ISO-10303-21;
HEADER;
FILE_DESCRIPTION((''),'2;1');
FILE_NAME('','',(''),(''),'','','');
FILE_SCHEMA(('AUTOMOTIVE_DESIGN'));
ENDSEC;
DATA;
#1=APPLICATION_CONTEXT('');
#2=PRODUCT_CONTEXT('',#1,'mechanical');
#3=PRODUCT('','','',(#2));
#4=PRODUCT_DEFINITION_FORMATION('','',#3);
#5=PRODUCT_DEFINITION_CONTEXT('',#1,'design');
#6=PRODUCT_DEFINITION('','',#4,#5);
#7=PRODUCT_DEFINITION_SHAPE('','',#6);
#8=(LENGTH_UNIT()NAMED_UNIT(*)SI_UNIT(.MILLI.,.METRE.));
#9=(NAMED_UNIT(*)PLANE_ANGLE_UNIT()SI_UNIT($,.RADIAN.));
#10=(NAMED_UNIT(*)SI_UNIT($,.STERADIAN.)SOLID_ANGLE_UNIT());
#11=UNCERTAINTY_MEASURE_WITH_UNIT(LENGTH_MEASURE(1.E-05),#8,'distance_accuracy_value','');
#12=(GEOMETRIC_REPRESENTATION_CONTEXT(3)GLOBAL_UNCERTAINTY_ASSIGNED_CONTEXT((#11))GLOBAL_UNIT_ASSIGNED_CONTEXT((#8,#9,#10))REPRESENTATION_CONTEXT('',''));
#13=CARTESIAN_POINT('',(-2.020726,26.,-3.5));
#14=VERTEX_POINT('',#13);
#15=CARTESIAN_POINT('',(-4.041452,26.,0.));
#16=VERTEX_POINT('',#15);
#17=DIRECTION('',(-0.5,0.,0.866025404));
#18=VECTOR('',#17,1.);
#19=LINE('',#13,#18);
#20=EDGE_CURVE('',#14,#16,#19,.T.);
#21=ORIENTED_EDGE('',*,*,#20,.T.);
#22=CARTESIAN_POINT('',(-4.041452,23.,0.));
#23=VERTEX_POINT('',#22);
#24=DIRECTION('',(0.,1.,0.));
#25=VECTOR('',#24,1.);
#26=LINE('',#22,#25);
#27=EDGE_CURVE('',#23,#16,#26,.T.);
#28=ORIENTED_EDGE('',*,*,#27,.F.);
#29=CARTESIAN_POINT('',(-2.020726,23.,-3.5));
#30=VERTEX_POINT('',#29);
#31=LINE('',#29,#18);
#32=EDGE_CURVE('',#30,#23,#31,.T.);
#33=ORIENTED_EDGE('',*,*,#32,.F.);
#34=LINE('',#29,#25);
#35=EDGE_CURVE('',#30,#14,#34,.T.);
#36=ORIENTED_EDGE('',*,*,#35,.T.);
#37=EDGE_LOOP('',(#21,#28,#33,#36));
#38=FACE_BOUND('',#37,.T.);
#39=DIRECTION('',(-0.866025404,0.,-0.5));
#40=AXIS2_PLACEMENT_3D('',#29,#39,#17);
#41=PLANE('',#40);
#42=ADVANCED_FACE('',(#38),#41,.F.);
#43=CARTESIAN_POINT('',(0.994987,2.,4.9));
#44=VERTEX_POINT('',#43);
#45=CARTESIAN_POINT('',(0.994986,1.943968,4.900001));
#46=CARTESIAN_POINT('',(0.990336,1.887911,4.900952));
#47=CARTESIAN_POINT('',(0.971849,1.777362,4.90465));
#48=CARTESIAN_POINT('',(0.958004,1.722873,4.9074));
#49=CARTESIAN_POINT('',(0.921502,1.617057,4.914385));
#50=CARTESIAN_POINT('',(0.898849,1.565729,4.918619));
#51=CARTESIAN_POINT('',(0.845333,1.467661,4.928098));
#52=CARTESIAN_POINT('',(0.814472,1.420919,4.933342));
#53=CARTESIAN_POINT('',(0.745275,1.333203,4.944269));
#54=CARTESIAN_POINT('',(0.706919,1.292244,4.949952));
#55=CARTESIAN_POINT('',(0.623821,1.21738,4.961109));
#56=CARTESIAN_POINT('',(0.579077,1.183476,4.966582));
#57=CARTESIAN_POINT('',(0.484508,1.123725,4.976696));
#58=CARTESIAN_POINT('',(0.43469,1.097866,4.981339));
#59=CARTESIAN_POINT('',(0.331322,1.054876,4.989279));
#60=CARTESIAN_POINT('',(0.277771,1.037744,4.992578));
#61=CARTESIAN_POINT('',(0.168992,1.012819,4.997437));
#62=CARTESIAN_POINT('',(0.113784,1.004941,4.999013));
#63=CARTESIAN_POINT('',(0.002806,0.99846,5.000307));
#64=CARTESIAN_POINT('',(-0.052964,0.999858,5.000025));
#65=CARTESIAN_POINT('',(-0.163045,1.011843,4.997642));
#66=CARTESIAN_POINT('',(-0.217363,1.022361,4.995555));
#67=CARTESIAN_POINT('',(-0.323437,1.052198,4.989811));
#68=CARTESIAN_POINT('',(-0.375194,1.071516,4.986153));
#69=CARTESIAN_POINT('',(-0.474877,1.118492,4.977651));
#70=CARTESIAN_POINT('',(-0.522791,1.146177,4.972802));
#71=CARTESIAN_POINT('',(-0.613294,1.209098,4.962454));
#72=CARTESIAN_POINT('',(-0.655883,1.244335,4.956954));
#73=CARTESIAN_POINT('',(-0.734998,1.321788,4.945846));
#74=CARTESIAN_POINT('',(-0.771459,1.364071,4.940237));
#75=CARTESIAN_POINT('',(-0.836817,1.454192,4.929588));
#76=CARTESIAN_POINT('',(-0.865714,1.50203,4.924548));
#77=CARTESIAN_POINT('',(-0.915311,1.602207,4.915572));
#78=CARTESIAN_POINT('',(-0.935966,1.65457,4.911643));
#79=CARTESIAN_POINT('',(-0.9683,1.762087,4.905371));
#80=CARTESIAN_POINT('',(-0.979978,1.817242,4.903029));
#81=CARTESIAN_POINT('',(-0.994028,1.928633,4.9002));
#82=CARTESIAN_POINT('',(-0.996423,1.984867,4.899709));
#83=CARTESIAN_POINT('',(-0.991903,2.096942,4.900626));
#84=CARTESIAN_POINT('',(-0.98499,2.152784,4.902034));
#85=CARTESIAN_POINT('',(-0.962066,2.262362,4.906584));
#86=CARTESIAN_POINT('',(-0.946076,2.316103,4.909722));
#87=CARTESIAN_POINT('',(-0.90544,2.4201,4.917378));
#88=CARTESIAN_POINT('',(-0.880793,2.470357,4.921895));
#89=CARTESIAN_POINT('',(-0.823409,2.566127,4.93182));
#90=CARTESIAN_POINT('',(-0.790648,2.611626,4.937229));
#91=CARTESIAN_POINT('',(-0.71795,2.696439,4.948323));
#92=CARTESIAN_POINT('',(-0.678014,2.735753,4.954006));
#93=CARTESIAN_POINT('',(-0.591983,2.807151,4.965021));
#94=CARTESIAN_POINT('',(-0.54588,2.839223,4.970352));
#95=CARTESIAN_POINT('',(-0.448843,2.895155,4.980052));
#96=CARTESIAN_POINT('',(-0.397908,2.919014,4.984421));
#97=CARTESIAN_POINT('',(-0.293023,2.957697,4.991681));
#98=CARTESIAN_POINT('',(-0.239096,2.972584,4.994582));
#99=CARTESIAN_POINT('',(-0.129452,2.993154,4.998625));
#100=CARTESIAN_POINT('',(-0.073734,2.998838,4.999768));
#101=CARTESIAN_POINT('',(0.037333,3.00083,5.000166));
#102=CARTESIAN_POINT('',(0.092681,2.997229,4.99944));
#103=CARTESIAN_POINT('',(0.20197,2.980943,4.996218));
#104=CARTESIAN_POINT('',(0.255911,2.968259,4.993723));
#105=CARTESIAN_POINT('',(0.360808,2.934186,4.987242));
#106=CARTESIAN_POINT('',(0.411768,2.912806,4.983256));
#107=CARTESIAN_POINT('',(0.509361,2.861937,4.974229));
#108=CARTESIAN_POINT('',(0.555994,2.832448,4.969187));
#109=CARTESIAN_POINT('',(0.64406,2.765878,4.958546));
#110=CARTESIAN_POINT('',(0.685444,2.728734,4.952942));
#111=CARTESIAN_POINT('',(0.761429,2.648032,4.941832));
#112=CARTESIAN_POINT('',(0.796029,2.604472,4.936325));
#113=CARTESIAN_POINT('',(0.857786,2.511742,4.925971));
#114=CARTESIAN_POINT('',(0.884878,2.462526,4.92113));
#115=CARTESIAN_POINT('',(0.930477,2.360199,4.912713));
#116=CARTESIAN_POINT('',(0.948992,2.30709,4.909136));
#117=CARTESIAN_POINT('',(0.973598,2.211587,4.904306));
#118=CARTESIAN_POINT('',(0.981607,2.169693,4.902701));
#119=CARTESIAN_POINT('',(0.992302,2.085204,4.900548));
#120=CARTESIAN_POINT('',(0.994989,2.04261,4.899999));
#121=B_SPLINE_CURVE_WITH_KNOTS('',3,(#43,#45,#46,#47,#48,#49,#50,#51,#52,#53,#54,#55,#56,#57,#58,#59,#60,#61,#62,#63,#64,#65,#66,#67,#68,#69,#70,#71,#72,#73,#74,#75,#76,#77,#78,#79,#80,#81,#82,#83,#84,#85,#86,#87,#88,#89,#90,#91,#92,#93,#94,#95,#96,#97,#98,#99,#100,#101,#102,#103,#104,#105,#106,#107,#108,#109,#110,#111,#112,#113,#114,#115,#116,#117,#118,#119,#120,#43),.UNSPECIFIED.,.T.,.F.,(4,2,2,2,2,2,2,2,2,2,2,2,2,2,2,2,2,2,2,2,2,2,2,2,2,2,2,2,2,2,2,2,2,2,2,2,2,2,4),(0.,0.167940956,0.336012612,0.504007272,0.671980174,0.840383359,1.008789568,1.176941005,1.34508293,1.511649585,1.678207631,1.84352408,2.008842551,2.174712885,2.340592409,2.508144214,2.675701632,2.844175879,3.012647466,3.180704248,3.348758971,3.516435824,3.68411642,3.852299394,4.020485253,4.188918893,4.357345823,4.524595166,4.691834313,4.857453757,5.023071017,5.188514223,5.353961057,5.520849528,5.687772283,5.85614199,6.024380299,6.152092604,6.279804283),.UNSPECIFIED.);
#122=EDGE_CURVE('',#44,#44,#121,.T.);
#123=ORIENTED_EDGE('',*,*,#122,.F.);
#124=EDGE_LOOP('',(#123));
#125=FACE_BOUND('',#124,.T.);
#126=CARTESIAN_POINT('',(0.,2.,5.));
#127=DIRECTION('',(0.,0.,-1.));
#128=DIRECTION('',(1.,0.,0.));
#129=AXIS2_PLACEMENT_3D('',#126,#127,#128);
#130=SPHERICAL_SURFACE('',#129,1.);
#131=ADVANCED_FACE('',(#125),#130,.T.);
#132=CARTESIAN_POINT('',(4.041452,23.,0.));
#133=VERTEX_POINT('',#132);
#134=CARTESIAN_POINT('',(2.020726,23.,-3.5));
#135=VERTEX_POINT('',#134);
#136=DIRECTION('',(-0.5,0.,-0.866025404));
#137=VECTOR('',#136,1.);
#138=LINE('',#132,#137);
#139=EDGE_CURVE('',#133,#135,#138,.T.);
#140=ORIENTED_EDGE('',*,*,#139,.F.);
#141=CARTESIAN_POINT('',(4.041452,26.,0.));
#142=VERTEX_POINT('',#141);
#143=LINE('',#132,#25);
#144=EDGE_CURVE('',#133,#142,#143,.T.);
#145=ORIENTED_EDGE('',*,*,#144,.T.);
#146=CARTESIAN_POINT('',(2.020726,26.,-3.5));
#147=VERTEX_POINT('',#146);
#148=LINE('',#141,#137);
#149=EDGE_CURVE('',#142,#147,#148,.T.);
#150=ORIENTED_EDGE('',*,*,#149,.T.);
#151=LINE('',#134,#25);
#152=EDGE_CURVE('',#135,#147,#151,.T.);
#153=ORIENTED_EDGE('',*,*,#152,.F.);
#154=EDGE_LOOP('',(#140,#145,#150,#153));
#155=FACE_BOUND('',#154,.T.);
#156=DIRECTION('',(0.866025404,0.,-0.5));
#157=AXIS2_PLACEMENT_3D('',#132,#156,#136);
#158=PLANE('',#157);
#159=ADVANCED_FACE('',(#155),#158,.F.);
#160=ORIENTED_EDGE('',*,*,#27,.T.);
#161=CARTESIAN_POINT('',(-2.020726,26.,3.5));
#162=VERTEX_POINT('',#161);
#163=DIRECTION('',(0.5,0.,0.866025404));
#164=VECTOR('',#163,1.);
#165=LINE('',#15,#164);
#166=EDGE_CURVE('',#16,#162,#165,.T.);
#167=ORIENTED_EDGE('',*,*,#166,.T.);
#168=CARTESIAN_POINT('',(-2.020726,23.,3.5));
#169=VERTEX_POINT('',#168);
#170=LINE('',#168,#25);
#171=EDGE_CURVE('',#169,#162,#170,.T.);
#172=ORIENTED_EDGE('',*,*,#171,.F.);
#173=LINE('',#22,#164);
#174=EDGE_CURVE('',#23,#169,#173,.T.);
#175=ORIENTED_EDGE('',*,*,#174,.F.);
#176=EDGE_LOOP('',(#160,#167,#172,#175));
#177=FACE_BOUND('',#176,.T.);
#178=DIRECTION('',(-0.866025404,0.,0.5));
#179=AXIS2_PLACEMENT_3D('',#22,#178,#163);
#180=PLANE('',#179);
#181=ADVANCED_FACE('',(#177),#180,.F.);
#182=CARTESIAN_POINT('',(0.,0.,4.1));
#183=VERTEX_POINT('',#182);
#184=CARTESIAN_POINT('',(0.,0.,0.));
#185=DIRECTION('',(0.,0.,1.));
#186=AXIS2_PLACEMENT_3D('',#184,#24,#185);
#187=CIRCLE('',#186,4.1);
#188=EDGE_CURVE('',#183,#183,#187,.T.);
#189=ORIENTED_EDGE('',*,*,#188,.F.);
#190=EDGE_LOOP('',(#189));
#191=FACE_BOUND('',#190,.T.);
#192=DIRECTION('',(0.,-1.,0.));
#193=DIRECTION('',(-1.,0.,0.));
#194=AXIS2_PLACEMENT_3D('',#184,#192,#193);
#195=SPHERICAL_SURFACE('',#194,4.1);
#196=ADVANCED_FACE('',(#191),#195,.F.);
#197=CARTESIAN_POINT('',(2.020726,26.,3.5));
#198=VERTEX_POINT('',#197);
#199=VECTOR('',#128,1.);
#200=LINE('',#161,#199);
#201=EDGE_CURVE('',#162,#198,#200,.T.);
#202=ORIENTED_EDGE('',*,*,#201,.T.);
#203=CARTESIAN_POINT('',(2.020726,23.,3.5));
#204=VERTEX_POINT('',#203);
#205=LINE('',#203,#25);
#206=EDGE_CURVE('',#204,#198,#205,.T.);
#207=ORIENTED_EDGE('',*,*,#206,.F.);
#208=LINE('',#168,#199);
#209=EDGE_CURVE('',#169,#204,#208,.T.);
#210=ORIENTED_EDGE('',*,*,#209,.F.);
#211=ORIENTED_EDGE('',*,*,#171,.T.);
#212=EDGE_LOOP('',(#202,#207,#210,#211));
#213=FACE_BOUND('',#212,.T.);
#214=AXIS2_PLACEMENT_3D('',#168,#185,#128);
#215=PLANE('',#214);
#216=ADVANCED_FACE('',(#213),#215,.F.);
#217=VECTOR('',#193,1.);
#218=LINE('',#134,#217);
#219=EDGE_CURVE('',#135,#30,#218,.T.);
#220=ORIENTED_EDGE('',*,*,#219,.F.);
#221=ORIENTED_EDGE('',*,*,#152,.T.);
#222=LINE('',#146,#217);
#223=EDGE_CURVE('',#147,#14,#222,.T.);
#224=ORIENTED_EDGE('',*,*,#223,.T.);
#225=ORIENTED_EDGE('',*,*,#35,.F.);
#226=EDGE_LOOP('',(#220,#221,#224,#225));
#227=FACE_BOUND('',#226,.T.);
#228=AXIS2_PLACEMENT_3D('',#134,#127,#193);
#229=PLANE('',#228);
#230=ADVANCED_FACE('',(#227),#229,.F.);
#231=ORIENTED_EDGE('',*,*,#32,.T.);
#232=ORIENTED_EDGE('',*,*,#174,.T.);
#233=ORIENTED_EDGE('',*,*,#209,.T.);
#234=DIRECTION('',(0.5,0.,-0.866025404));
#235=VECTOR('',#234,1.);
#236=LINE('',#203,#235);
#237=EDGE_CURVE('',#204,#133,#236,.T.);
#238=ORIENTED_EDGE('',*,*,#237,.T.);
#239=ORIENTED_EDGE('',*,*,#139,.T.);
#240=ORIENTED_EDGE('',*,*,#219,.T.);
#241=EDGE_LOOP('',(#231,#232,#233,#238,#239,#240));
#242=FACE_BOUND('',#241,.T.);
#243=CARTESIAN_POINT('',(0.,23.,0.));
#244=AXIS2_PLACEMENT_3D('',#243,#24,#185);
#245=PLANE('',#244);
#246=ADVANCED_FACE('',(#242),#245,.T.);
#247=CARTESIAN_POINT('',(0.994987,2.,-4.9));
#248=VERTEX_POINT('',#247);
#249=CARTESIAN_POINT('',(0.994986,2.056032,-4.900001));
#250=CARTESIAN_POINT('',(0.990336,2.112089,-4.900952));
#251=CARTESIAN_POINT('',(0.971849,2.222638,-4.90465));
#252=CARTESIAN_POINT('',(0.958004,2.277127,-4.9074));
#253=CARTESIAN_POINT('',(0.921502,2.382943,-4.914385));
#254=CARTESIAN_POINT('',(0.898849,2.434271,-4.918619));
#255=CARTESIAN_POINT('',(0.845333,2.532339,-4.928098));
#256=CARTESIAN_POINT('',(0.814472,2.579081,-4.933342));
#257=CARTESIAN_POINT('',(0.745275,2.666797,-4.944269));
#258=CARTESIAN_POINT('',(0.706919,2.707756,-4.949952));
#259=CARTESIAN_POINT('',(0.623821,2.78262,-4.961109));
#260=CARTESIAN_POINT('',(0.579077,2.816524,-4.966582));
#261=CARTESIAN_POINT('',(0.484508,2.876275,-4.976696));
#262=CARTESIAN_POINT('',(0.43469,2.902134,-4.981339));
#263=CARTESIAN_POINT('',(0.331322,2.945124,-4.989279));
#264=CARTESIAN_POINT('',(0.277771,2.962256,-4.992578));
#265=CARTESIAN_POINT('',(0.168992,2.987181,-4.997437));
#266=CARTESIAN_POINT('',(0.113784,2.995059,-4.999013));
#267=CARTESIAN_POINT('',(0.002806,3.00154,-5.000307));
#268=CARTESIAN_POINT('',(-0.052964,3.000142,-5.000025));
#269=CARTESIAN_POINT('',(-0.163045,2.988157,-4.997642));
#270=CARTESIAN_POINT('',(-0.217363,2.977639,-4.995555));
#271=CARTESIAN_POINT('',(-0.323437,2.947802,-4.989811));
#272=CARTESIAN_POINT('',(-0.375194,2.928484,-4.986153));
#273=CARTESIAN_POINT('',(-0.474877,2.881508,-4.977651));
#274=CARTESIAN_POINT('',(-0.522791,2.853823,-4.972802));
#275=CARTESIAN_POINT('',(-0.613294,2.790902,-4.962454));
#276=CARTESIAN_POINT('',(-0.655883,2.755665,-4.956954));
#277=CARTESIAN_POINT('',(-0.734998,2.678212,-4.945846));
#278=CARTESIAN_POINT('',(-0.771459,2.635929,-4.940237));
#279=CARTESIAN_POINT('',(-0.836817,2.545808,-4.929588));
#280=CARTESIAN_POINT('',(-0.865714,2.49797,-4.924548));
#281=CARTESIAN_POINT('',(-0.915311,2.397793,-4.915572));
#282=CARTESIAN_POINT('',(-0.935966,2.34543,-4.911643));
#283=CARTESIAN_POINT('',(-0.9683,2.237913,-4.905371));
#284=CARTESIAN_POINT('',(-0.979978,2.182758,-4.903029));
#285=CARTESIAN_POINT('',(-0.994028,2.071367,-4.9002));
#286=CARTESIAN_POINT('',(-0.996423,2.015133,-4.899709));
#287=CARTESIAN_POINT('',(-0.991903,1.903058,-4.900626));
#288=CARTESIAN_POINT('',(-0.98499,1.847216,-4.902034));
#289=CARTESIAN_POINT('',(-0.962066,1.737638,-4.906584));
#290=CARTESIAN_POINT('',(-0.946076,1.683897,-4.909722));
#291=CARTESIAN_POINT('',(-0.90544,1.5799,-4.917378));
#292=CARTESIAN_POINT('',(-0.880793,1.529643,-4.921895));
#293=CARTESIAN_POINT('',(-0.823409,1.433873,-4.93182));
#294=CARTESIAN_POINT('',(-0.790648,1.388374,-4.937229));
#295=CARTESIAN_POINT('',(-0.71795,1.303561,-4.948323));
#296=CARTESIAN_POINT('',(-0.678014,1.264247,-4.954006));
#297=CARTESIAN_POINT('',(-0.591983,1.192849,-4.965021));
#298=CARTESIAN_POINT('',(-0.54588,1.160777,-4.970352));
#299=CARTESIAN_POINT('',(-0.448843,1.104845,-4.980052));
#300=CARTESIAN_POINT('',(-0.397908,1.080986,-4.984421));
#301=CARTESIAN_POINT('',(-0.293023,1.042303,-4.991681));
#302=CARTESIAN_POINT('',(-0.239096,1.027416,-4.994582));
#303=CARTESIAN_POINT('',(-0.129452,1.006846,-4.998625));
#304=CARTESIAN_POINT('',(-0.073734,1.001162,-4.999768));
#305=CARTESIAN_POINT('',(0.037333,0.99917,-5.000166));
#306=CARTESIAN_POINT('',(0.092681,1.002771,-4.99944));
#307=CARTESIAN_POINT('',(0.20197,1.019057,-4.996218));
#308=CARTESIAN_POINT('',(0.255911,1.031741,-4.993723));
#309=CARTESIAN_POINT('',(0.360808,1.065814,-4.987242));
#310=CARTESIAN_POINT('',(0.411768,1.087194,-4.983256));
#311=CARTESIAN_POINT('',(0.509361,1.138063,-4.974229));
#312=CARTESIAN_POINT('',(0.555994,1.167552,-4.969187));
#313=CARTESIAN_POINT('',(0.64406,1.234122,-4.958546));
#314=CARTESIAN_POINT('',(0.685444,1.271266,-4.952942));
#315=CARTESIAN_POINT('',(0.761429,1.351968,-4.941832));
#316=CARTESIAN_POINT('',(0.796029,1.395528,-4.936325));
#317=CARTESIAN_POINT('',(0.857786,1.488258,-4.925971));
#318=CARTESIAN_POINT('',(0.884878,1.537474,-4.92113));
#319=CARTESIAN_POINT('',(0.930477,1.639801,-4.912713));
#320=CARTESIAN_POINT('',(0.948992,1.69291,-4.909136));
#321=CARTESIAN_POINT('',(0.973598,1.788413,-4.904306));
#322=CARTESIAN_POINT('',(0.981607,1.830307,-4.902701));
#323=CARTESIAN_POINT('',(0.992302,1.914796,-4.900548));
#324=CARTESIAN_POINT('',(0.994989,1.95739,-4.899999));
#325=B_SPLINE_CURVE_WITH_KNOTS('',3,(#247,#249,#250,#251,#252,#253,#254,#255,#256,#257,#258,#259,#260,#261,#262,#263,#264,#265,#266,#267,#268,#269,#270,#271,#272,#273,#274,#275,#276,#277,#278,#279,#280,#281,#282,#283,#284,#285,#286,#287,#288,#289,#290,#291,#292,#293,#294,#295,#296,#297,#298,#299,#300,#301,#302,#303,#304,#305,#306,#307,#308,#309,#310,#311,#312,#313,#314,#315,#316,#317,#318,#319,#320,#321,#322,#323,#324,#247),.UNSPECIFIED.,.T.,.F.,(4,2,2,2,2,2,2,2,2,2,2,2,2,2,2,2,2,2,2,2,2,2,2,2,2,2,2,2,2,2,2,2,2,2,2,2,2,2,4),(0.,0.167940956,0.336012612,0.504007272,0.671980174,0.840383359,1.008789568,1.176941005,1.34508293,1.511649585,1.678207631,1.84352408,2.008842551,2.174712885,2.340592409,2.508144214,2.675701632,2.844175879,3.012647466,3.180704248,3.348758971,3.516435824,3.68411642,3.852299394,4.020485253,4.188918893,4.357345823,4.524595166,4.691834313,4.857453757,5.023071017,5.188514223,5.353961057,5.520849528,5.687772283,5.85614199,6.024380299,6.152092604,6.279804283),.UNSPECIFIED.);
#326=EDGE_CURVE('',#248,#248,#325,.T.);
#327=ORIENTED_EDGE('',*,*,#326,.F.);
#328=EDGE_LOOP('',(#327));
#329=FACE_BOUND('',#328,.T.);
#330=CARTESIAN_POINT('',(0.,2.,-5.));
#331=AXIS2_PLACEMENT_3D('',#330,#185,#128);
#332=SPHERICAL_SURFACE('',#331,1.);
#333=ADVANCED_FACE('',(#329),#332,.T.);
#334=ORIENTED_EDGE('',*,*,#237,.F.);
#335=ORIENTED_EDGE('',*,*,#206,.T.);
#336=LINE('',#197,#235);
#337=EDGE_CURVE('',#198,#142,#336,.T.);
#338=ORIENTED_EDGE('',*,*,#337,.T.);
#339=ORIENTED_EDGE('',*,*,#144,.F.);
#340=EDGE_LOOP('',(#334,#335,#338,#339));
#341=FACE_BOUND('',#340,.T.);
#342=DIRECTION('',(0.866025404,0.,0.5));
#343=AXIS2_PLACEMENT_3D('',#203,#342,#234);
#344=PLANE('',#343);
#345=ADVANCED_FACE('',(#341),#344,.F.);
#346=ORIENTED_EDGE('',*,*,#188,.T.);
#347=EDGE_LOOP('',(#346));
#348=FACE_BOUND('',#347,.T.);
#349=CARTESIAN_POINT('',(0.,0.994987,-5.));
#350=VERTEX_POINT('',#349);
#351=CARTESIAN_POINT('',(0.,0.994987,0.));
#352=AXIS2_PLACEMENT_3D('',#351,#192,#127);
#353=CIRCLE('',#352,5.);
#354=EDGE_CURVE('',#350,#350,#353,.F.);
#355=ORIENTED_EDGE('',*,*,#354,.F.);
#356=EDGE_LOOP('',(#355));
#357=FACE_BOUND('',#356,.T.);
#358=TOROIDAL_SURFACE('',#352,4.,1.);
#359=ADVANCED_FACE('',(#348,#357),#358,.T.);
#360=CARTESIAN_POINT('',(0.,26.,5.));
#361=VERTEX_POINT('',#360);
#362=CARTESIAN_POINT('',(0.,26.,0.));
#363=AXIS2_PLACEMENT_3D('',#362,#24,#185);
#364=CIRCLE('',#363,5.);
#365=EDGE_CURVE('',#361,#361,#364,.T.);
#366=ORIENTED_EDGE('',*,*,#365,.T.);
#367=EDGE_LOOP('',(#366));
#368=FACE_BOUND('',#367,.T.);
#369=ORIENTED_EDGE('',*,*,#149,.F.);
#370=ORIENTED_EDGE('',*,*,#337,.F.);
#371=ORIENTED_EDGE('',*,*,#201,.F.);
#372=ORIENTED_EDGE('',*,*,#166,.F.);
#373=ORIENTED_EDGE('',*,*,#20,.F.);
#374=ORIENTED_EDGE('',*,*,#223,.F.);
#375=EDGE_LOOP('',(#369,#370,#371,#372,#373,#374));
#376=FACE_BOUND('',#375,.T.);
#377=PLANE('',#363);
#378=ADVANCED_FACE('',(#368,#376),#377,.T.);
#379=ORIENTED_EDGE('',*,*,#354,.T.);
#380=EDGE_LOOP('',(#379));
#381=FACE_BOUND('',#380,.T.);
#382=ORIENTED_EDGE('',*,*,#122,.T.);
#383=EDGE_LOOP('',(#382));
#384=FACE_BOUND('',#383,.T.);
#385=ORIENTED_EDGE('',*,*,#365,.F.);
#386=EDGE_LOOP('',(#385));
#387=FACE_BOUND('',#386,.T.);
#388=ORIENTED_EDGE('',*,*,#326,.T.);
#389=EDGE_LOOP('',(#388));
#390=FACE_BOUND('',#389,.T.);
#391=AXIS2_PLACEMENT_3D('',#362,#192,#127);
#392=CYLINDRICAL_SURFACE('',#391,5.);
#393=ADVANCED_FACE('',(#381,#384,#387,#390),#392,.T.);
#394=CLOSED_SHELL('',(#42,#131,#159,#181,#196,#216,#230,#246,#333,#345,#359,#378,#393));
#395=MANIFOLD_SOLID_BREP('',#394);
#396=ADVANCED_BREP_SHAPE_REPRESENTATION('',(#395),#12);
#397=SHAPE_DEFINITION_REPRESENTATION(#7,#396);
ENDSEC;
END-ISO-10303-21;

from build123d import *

# Parameters (mm, degrees)
SKETCH1_R           = 5
BOSS_EXTRUDE1_DEPTH = 26
CUT_EXTRUDE1_DEPTH  = 3
FILLET1_R           = 1


with BuildPart() as part:
    # Sketch1 → Boss-Extrude1 (new body)
    with BuildSketch(Plane(origin=(0, 0, 0), x_dir=(1, 0, 0), z_dir=(0, 1, 0))):
        with Locations(Location((0, 0, 0), (0, 0, 90))):
            Circle(SKETCH1_R)
    extrude(amount=BOSS_EXTRUDE1_DEPTH)

    # Sketch2 → Cut-Revolve1 (revolve, cut)
    with BuildSketch(Plane.XY):
        with BuildLine():
            Line((0, -4.1), (0, 4.1))
            ThreePointArc((0, 4.1), (4.1, 0), (0, -4.1))
        make_face()
    revolve(axis=Axis((0, -4.1, 0), (0, 1, 0)), mode=Mode.SUBTRACT)

    # Sketch4 → Revolve1 (revolve)
    with BuildSketch(Plane(origin=(0, 2, 0), x_dir=(1, 0, 0), z_dir=(0, 1, 0))):
        with BuildLine():
            Line((0, 6), (0, 5))
            ThreePointArc((0, 5), (0.5, 4.974937186), (0.994987437, 4.9))
            ThreePointArc((0.994987437, 4.9), (0.741619849, 5.670820393), (0, 6))
        make_face()
    revolve1 = revolve(axis=Axis((0, 2, 0), (0, 0, -1)))

    # Sketch5 → Cut-Extrude1 (cut)
    with BuildSketch(Plane(origin=(0, 26, 0), x_dir=(1, 0, 0), z_dir=(0, 1, 0))):
        Polygon((-4.041451884, 0), (-2.020725942, -3.5), (2.020725942, -3.5), (4.041451884, 0), (2.020725942, 3.5), (-2.020725942, 3.5), align=None)
    extrude(amount=-CUT_EXTRUDE1_DEPTH, mode=Mode.SUBTRACT)

    # Mirror1: Revolve1 across plane
    add(revolve1.mirror(Plane.XY))

    # Fillet1
    # the kernel refuses this fillet: 1 mm, written as the material it takes off along each edge
    with BuildSketch(Plane(origin=(0, 0, 0), x_dir=(0, 0, -1), z_dir=(1, 0, 0))) as fillet1_piece_1:
        with BuildLine():
            CenterArc((4, 0.994987437), FILLET1_R, 275.739170477, 84.260829523)
            Line((4.1, 0), (4.102, -0.019899749))
            ThreePointArc((4.102, -0.019899749), (4.55, -0.02), (5, -0.02))
            Line((5, -0.02), (5.02, 0))
            Line((5.02, 0), (5.02, 0.994987437))
            Line((5.02, 0.994987437), (5, 0.994987437))
        make_face()
    revolve(axis=Axis((0, 0, 0), (0, 1, 0)), mode=Mode.SUBTRACT)


solid = part.part
